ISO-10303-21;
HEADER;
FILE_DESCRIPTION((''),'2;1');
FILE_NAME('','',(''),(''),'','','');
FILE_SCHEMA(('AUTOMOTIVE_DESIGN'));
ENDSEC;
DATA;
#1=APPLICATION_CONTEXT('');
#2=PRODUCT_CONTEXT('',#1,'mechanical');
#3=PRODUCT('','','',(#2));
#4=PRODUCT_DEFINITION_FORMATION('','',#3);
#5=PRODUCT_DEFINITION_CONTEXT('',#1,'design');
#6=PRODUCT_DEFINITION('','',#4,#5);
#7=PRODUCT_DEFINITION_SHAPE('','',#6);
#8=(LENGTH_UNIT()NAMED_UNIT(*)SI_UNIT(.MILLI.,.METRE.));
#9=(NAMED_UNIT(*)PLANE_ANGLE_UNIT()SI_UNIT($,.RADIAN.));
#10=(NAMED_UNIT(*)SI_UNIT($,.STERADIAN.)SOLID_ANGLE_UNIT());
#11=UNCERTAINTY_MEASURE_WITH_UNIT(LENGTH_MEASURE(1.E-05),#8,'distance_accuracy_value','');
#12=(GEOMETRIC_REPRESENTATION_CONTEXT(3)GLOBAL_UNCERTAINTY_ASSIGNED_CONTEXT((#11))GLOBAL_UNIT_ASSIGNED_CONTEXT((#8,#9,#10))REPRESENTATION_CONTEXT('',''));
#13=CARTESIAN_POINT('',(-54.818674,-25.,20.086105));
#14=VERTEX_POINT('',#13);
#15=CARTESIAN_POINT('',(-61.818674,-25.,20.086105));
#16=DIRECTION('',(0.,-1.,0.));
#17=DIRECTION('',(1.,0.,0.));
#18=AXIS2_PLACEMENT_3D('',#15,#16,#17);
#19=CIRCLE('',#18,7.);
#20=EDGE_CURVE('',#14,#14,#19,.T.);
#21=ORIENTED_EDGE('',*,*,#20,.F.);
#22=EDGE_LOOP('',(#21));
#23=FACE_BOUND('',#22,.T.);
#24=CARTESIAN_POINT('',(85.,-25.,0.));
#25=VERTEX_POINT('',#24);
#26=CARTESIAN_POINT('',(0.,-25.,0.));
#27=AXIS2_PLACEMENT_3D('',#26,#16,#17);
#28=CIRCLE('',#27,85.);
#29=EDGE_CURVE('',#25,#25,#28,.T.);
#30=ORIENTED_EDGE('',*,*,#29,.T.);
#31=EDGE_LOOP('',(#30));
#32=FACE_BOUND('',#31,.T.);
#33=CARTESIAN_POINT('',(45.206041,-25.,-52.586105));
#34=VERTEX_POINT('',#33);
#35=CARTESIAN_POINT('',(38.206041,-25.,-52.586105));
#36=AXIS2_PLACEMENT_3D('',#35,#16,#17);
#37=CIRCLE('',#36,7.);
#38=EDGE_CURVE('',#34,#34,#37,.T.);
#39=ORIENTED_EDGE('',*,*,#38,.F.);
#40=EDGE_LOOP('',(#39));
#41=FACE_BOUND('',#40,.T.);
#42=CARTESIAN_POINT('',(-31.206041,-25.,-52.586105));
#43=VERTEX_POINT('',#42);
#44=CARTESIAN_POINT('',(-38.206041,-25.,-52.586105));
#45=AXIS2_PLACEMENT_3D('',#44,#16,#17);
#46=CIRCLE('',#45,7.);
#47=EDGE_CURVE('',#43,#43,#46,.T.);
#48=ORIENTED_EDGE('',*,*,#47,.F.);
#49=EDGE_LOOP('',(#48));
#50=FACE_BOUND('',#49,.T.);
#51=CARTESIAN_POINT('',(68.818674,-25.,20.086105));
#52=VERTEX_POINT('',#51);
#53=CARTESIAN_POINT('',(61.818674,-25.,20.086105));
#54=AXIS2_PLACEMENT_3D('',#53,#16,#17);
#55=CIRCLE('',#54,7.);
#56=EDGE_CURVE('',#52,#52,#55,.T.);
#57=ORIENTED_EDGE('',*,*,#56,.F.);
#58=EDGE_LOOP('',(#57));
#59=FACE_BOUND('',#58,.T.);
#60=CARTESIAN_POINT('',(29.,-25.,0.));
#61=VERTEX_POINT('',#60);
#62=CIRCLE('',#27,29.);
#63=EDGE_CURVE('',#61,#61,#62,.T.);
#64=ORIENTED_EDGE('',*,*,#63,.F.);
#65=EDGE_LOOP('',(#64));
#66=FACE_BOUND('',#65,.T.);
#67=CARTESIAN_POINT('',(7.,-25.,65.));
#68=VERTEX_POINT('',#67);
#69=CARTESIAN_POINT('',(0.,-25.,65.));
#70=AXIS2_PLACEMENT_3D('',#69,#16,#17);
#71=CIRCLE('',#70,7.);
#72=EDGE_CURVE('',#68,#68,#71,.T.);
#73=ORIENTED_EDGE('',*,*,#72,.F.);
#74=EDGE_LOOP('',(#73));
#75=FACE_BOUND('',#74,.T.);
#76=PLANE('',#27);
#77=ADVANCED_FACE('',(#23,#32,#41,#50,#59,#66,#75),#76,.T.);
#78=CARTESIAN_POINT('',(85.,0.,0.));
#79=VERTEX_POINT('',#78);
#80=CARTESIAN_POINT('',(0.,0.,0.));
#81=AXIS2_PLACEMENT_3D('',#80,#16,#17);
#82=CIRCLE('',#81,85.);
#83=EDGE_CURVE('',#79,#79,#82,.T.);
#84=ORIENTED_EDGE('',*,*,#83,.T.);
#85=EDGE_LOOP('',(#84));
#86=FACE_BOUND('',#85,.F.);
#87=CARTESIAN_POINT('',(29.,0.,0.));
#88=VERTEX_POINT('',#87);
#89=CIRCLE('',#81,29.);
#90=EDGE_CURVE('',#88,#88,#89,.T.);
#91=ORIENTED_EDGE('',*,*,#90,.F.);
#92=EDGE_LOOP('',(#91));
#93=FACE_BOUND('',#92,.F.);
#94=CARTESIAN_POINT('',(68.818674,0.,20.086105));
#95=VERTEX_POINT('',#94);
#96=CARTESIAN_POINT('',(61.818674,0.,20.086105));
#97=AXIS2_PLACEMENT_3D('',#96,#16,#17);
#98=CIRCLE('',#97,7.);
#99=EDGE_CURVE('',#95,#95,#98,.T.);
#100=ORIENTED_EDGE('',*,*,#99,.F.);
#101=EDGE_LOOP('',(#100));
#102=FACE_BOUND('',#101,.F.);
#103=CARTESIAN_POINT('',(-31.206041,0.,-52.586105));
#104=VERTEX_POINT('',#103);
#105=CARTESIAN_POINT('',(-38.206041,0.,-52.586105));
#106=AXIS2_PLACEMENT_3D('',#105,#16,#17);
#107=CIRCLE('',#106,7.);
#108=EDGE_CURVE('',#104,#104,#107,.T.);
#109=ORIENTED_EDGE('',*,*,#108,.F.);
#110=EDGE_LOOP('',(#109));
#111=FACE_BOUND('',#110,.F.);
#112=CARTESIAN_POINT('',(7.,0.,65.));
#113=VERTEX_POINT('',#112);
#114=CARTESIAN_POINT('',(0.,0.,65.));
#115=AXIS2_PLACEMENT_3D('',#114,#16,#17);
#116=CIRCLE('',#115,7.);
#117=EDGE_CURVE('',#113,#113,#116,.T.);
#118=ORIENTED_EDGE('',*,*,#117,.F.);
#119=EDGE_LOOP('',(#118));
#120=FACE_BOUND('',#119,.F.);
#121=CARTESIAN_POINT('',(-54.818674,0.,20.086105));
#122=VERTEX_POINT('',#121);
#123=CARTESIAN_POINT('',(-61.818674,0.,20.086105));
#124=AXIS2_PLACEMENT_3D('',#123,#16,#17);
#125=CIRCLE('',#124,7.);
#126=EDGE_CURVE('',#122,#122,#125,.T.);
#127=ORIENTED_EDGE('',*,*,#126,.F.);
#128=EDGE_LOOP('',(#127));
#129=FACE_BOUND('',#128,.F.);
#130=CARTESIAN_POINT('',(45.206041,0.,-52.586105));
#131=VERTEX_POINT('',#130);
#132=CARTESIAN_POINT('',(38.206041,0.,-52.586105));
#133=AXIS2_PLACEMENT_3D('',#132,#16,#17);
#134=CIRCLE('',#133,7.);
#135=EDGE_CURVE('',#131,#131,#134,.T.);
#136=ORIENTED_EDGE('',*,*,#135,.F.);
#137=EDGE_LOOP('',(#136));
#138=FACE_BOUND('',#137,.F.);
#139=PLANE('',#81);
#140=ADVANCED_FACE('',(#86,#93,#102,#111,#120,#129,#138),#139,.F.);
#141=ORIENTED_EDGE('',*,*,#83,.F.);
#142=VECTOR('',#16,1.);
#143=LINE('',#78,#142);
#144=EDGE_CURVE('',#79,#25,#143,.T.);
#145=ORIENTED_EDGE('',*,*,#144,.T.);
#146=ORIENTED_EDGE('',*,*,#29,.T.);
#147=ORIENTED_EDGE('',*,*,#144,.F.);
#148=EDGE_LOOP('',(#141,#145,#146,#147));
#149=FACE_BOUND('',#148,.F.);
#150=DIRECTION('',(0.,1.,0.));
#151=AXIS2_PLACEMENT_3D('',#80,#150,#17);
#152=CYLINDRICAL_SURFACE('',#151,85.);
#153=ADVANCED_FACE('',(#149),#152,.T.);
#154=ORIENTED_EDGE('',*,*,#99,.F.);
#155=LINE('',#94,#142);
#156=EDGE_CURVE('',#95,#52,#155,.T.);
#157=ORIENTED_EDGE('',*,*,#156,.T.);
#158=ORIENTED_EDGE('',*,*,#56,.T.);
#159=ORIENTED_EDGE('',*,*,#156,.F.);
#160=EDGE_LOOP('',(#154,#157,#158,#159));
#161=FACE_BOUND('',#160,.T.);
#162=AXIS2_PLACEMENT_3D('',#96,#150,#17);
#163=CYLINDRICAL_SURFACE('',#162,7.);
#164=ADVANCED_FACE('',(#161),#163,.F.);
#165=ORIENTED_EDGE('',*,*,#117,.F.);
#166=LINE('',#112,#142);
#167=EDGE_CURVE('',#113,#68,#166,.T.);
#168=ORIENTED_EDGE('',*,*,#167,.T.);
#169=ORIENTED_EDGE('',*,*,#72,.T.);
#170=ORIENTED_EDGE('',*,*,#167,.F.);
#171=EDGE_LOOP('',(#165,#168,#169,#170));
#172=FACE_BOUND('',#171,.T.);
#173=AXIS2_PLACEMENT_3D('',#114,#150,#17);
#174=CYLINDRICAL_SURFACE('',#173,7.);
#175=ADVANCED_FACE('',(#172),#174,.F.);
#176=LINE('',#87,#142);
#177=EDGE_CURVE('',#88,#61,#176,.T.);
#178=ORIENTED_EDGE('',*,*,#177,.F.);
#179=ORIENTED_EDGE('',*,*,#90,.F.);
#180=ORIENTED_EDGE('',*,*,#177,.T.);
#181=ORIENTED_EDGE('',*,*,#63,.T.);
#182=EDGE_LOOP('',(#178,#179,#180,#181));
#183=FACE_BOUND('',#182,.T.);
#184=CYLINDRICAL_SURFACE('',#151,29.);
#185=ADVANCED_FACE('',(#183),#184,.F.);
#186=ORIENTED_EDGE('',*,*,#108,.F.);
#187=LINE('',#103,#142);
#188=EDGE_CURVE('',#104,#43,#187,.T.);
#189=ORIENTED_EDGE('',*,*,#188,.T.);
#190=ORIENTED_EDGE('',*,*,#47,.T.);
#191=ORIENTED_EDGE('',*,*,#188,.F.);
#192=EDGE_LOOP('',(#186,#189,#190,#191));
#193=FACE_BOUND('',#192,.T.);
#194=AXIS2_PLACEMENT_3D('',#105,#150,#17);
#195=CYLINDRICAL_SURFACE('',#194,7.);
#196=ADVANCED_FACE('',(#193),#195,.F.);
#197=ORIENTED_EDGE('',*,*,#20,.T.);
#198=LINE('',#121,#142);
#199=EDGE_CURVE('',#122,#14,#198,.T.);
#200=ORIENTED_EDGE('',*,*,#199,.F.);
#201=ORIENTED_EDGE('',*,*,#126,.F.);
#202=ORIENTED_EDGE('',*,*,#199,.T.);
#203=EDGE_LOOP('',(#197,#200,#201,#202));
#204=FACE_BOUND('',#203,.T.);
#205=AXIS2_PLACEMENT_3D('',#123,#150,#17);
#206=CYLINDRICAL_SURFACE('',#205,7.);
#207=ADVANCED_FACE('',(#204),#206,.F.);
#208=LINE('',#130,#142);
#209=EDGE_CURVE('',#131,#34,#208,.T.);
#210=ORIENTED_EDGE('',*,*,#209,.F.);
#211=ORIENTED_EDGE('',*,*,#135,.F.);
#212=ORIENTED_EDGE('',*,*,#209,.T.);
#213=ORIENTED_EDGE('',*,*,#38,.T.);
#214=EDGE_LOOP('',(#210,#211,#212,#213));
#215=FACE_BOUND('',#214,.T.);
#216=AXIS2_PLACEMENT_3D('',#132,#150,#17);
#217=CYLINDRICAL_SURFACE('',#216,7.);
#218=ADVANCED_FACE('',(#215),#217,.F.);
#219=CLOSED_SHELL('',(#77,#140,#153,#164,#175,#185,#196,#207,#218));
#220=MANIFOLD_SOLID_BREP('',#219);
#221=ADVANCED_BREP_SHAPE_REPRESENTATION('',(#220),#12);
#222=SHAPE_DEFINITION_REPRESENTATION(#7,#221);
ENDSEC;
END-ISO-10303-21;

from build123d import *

# Parameters (mm, degrees)
F0_R     = 85
F0_R_2   = 7
F0_R_3   = 29
F1_DEPTH = 25


# Not quite as in the source:
# - the program builds the solid bodies; features that only make, move or delete a surface that nothing else refers to are left out


with BuildPart() as f1:
    # F0 (on Front) → F1 (new body)
    with BuildSketch(Plane.XZ):
        Circle(F0_R)
        with Locations((-38.206041399, -52.5861046344)):
            Circle(F0_R_2, mode=Mode.SUBTRACT)
        with Locations((38.206041399, -52.5861046344)):
            Circle(F0_R_2, mode=Mode.SUBTRACT)
        with Locations((-61.8186735592, 20.0861046344)):
            Circle(F0_R_2, mode=Mode.SUBTRACT)
        Circle(F0_R_3, mode=Mode.SUBTRACT)
        with Locations((61.8186735592, 20.0861046344)):
            Circle(F0_R_2, mode=Mode.SUBTRACT)
        with Locations((0, 65)):
            Circle(F0_R_2, mode=Mode.SUBTRACT)
    extrude(amount=F1_DEPTH)


solid = f1.part
